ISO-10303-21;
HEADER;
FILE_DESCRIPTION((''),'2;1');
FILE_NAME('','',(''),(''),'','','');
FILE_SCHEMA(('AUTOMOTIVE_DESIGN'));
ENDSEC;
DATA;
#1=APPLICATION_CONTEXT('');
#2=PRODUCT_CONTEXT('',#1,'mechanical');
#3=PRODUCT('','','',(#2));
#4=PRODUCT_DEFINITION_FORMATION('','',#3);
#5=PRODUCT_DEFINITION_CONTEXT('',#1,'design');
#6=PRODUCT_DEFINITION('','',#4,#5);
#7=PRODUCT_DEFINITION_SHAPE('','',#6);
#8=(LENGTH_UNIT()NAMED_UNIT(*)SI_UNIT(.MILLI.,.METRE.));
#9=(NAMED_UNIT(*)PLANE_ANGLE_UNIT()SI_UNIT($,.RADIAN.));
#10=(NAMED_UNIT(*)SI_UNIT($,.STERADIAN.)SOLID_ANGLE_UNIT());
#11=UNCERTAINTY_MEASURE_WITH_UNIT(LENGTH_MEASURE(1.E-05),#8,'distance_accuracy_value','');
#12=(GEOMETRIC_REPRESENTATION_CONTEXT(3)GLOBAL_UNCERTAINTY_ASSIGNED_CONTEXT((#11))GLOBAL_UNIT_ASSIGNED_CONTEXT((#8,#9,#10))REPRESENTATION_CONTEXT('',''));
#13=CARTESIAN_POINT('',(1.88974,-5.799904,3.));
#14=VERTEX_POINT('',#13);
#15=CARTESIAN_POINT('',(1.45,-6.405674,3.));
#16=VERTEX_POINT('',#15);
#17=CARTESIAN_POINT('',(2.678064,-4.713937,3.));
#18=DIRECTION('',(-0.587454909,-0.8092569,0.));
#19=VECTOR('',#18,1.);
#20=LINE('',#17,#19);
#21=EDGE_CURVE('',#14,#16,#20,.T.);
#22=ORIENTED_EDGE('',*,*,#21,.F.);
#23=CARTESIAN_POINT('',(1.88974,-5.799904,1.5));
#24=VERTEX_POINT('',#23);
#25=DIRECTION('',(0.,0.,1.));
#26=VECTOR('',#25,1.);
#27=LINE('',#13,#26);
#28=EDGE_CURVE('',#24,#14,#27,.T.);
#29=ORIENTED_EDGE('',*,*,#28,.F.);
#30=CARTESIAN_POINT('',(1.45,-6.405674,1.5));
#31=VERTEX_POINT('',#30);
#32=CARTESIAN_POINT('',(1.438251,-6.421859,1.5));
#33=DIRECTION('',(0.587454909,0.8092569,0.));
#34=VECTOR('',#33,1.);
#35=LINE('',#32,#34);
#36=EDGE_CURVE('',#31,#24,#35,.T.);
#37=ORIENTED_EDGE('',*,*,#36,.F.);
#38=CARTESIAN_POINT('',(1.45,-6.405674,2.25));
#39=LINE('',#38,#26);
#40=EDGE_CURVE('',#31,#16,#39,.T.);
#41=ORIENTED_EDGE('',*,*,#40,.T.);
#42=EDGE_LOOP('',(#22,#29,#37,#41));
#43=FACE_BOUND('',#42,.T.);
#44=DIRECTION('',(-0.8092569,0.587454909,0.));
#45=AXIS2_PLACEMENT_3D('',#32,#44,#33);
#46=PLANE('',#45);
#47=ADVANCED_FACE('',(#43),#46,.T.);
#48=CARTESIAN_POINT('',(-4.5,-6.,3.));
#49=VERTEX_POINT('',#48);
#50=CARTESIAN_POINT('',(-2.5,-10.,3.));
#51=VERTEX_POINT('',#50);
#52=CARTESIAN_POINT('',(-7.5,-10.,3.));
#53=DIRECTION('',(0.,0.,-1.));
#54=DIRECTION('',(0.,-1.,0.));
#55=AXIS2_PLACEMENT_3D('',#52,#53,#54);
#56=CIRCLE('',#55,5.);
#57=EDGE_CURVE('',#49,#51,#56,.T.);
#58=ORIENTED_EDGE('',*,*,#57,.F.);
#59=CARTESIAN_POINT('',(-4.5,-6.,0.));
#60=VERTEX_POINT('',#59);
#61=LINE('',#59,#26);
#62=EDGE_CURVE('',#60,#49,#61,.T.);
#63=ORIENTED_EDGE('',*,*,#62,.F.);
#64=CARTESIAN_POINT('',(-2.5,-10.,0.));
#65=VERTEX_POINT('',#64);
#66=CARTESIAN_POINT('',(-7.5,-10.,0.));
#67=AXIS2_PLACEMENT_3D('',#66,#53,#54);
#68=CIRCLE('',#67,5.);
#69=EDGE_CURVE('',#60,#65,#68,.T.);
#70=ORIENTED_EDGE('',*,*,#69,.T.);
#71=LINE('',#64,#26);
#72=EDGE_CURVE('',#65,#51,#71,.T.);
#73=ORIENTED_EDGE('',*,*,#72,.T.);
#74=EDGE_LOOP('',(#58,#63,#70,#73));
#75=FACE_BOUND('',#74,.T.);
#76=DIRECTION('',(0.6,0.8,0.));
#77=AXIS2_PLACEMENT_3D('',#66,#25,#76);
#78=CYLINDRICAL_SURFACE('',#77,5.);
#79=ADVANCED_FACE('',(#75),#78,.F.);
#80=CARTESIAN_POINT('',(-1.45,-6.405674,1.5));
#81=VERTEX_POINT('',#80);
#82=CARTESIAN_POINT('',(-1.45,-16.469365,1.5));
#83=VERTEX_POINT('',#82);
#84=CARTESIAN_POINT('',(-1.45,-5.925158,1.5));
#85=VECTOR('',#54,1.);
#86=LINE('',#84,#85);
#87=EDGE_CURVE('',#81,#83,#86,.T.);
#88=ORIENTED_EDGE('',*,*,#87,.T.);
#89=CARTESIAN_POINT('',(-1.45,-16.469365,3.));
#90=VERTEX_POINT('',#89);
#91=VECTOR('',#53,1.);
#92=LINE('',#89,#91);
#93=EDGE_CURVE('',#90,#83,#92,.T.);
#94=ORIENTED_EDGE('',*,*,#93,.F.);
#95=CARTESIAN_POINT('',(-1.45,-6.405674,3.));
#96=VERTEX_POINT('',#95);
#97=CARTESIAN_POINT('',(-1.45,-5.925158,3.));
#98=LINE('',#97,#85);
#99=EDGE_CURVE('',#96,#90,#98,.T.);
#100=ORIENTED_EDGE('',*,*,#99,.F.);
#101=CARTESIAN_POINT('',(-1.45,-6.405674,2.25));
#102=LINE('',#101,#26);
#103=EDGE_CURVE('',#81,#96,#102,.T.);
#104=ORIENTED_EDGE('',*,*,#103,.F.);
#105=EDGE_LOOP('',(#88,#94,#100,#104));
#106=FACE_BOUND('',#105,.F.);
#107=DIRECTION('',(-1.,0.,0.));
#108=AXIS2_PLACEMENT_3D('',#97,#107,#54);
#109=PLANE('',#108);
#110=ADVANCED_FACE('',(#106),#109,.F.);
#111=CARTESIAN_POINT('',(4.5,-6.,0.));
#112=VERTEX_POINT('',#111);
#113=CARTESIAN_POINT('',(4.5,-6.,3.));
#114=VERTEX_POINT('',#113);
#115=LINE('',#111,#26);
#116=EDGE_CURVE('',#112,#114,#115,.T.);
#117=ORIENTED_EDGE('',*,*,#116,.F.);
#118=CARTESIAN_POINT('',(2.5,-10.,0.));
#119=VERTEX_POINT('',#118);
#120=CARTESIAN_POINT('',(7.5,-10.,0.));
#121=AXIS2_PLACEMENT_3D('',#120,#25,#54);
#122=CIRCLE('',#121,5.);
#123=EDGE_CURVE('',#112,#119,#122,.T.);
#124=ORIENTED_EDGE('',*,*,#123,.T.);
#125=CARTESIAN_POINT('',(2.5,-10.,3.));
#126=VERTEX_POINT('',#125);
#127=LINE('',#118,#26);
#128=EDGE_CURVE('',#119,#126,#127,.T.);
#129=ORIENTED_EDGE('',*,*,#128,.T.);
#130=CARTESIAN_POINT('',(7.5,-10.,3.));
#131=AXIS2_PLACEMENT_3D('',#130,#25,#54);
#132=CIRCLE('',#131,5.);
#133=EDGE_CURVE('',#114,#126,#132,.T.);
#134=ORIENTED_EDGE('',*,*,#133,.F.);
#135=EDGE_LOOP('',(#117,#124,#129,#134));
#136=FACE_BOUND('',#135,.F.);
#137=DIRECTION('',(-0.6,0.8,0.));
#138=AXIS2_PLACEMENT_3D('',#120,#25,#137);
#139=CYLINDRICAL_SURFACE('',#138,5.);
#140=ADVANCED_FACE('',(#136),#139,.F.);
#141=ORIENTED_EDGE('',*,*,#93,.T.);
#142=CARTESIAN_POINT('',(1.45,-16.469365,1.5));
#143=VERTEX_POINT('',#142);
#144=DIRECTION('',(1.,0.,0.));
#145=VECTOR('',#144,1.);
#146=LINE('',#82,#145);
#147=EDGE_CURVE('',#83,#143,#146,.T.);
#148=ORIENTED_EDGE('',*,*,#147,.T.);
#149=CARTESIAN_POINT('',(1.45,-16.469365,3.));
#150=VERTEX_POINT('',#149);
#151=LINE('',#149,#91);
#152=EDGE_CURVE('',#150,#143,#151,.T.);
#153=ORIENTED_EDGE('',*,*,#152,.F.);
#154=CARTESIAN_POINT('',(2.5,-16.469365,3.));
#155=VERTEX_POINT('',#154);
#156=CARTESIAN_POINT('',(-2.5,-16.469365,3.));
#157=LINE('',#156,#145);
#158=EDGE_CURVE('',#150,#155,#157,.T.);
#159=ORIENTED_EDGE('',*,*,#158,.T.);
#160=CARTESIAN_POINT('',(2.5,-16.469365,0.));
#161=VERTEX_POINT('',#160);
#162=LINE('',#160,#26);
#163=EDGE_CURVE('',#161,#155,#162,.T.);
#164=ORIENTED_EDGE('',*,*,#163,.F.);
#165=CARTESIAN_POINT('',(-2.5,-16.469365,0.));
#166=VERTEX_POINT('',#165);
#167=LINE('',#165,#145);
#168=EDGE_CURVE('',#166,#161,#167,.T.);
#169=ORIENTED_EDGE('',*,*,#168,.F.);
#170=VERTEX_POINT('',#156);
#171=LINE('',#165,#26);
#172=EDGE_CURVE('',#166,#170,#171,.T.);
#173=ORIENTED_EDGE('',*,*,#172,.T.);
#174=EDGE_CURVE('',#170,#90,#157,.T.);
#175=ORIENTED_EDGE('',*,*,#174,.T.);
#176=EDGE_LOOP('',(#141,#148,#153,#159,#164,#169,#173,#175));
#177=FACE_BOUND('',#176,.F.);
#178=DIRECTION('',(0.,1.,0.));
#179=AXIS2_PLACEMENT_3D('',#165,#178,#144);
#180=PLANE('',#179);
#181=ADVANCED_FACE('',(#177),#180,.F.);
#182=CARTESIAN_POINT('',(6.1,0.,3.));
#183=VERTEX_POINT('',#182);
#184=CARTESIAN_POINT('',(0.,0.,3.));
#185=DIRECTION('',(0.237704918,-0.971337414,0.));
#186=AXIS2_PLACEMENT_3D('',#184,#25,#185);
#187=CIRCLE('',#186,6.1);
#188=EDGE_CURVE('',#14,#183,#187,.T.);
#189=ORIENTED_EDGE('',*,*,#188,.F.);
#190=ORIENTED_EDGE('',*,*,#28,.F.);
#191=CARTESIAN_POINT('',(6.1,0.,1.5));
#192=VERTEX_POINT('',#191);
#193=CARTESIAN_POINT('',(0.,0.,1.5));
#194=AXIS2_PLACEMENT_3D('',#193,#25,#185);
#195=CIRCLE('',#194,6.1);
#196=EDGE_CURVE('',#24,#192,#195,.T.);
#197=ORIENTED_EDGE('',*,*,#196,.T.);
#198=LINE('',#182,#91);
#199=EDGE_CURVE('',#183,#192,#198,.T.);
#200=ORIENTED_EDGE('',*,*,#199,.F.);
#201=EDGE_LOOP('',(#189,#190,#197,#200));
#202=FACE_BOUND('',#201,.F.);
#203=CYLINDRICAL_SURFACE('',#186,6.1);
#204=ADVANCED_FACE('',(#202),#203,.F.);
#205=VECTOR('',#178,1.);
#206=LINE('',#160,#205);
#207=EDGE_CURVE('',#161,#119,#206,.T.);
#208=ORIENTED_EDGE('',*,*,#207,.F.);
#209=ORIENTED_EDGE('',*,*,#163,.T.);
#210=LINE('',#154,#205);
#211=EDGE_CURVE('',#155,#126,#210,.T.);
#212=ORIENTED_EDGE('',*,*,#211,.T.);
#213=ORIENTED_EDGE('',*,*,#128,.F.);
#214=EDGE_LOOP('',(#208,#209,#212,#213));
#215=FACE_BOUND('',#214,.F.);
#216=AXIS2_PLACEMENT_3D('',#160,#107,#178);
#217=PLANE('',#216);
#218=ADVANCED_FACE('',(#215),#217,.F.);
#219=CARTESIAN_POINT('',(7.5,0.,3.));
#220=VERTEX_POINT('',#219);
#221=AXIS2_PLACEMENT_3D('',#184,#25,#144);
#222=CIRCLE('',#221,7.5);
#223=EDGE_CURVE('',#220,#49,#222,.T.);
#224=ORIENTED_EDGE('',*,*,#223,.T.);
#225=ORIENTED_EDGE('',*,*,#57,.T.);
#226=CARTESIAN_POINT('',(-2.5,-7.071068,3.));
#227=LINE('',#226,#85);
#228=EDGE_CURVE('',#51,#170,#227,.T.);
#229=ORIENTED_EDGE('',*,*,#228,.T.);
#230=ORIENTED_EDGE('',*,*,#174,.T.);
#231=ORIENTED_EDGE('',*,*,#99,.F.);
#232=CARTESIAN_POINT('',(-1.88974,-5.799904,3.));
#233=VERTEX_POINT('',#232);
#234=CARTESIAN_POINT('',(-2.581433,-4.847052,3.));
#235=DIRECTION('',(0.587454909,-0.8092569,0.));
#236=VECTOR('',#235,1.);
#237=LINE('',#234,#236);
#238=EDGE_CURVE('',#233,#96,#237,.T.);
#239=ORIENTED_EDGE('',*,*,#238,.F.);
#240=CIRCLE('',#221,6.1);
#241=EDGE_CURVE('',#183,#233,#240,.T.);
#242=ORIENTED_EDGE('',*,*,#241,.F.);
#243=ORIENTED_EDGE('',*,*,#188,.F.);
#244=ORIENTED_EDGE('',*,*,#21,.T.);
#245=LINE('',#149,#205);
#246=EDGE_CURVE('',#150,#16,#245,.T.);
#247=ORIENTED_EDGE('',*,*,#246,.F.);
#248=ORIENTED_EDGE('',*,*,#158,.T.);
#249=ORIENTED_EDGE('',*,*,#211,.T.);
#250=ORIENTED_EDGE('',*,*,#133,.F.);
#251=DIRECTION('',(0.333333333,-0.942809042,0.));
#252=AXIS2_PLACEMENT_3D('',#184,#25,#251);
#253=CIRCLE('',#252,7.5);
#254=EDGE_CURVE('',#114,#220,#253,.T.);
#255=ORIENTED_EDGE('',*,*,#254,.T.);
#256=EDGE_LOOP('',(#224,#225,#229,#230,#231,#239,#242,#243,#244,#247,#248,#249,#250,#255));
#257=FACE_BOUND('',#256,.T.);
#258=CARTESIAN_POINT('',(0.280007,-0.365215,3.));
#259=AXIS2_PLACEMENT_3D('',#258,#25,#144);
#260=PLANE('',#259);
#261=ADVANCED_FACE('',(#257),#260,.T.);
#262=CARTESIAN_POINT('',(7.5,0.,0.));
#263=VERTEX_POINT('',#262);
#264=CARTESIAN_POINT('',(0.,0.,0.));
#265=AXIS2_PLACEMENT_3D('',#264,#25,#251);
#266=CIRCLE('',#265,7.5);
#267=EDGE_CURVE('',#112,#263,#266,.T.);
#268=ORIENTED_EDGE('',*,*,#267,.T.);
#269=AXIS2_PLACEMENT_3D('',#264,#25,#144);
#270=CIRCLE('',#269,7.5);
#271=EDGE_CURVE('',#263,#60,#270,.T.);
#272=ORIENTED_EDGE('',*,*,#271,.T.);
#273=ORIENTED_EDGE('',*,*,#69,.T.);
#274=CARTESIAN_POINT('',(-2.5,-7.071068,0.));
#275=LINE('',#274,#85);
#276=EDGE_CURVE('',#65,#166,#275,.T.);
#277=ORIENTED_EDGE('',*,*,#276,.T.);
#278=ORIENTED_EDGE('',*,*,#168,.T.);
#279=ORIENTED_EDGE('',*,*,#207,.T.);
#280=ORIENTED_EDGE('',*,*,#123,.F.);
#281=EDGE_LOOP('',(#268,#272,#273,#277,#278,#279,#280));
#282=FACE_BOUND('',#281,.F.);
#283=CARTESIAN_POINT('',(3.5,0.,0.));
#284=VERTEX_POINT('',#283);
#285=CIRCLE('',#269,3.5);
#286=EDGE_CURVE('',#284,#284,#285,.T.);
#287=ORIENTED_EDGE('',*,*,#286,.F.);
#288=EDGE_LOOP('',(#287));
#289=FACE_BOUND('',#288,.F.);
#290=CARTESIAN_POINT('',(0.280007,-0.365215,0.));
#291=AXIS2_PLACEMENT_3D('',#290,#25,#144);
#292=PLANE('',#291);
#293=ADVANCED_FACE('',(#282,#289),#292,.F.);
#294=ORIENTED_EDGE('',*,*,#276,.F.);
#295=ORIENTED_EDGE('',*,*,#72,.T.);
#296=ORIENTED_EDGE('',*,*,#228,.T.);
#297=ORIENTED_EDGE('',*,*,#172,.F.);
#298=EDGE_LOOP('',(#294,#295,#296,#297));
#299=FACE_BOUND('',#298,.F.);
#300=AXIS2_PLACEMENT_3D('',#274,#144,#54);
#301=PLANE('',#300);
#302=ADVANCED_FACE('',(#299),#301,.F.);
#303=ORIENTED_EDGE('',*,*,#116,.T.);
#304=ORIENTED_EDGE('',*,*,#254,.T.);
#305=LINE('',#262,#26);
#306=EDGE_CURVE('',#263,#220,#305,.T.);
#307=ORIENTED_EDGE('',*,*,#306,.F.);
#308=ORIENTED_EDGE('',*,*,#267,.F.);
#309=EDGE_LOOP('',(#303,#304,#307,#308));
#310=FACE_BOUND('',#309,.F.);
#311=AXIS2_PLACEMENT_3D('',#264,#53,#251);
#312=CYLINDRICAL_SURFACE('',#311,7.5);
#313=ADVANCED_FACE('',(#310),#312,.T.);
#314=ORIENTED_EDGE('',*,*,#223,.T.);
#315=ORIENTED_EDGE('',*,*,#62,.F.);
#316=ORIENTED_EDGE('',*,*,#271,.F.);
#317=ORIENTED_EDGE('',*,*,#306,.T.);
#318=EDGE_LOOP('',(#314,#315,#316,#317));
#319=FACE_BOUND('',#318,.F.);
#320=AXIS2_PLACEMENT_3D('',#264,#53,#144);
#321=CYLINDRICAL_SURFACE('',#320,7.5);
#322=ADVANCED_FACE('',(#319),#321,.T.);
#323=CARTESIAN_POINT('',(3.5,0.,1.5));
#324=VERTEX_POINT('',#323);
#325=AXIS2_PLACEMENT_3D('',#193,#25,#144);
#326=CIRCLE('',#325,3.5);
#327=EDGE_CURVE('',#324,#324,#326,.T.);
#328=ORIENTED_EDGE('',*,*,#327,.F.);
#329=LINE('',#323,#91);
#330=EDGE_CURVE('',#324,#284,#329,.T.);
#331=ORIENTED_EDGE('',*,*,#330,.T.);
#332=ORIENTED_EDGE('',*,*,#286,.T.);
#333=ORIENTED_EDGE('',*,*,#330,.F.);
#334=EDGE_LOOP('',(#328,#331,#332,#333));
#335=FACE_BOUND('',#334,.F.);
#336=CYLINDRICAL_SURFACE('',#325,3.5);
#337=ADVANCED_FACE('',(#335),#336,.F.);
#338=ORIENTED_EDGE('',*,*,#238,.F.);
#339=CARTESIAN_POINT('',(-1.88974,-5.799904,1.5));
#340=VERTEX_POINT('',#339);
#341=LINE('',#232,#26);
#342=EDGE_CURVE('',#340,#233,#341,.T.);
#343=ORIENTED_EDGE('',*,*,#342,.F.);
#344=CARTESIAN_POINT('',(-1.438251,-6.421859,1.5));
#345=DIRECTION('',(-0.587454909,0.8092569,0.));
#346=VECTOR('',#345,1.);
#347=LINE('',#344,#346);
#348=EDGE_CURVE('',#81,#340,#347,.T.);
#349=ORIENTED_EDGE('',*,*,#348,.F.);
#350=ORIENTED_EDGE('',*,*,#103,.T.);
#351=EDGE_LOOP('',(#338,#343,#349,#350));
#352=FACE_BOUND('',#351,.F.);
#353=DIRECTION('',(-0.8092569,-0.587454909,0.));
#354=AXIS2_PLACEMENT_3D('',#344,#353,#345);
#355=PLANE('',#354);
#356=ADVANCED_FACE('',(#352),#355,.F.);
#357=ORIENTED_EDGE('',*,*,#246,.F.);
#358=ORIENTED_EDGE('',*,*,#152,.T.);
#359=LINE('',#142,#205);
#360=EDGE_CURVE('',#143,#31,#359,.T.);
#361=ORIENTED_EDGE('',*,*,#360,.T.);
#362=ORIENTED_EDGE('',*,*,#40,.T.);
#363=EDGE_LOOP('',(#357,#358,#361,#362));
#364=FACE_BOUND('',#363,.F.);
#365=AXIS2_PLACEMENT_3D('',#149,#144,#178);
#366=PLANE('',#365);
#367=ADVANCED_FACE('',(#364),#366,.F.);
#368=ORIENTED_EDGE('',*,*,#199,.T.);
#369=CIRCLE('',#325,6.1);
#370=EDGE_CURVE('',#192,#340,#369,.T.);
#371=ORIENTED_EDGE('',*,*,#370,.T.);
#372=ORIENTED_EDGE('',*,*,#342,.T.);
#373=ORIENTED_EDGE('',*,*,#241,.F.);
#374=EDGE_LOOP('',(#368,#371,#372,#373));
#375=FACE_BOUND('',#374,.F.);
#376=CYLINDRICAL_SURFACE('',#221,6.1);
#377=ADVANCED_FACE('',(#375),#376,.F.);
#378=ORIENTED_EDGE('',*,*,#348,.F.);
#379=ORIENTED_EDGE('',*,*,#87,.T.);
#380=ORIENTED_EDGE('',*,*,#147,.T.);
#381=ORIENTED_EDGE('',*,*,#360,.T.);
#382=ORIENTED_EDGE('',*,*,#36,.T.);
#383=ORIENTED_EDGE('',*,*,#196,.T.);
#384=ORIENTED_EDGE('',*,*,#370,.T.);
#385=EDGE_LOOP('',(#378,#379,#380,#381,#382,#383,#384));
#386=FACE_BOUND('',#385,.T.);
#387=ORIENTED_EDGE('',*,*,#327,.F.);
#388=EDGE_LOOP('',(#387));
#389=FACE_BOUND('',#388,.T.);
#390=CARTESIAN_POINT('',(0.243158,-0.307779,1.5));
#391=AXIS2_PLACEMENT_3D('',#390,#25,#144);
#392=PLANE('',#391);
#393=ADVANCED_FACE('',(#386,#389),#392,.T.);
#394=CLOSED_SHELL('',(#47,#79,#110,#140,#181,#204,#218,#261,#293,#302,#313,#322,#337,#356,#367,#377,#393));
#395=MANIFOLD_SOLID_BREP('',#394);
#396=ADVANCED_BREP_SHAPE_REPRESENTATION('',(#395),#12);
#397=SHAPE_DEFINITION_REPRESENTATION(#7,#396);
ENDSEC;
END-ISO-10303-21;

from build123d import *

# Parameters (mm, degrees)
F1_DEPTH    = 3
F3_DEPTH    = 1.5
F4_R        = 3.5
F5_DEPTH    = 1.5
F6_T1_DEPTH = 2.7420993995
F7_R        = 5


# Not quite as in the source:
# - a fillet or chamfer that OpenCascade refuses, or shapes differently, is made with other operations: its cross-section is extruded or revolved along the edge and cut away or added


with BuildPart() as f1:
    # F0 (on Top) → F1 (new body)
    with BuildSketch(Plane.XY):
        with BuildLine():
            ThreePointArc((2.5, -7.0710678119), (6.123724357, -4.3301270189), (7.5, 0))
            ThreePointArc((7.5, 0), (-4.3301270189, 6.123724357), (-2.5, -7.0710678119))
            Line((-2.5, -7.0710678119), (2.5, -7.0710678119))
        make_face()
        with BuildLine():
            Line((2.5, -7.0710678119), (-2.5, -7.0710678119))
            ThreePointArc((-2.5, -7.0710678119), (0, -7.5), (2.5, -7.0710678119))
        make_face()
        with BuildLine():
            ThreePointArc((2.5, -7.0710678119), (0, -7.5), (-2.5, -7.0710678119))
            Line((-2.5, -7.0710678119), (-2.5, -16.4693647414))
            Line((-2.5, -16.4693647414), (2.5, -16.4693647414))
            Line((2.5, -16.4693647414), (2.5, -7.0710678119))
        make_face()
    extrude(amount=F1_DEPTH)

    # F2 (on face) → F3 (cut)
    with BuildSketch(Plane.XY.offset(3)):
        with BuildLine():
            ThreePointArc((1.45, -5.9251582257), (4.79869774, -3.7659660115), (6.1, 0))
            ThreePointArc((6.1, 0), (-3.7659660115, 4.79869774), (-1.45, -5.9251582257))
            Line((-1.45, -5.9251582257), (1.45, -5.9251582257))
        make_face()
        with BuildLine():
            Line((1.45, -5.9251582257), (-1.45, -5.9251582257))
            ThreePointArc((-1.45, -5.9251582257), (0, -6.1), (1.45, -5.9251582257))
        make_face()
        with BuildLine():
            ThreePointArc((1.45, -5.9251582257), (0, -6.1), (-1.45, -5.9251582257))
            Line((-1.45, -5.9251582257), (-1.45, -16.4693647414))
            Line((-1.45, -16.4693647414), (1.45, -16.4693647414))
            Line((1.45, -16.4693647414), (1.45, -5.9251582257))
        make_face()
    extrude(amount=-F3_DEPTH, mode=Mode.SUBTRACT)

    # F4 (on face) → F5 (cut, through all)
    with BuildSketch(Plane.XY.offset(1.5)):
        Circle(F4_R)
    extrude(amount=-F5_DEPTH, mode=Mode.SUBTRACT)

    # F6: chamfer of 0.5 on 2 edges, made by hand

    # F6_s2 → F6_t1 (cut)
    with BuildSketch(Plane.XY.offset(1.5)):
        with BuildLine():
            Line((1.4382509018, -6.4218590468), (1.9014892015, -5.7837185114))
            Line((1.9014892015, -5.7837185114), (1.8983912669, -5.7742104726))
            ThreePointArc((1.8983912669, -5.7742104726), (1.6758695773, -5.854874991), (1.4476229508, -5.9154448516))
            Line((1.4476229508, -5.9154448516), (1.44, -5.9251582257))
            ThreePointArc((1.44, -5.9251582257), (1.44, -6.1735086363), (1.4282509018, -6.4218590468))
            Line((1.4282509018, -6.4218590468), (1.4382509018, -6.4218590468))
        make_face()
        with BuildLine():
            Line((-1.4382509018, -6.4218590468), (-1.9014892015, -5.7837185114))
            Line((-1.9014892015, -5.7837185114), (-1.8983912669, -5.7742104726))
            ThreePointArc((-1.8983912669, -5.7742104726), (-1.6758695773, -5.854874991), (-1.4476229508, -5.9154448516))
            Line((-1.4476229508, -5.9154448516), (-1.44, -5.9251582257))
            ThreePointArc((-1.44, -5.9251582257), (-1.44, -6.1735086363), (-1.4282509018, -6.4218590468))
            Line((-1.4282509018, -6.4218590468), (-1.4382509018, -6.4218590468))
        make_face()
    extrude(amount=F6_T1_DEPTH, mode=Mode.SUBTRACT)

    # F7
    f7_edges = [f1.edges().sort_by_distance(p)[0] for p in [
        (-2.5, -7.071068, 1.5),
        (2.5, -7.071068, 1.5),
    ]]
    fillet(f7_edges, radius=F7_R)


solid = f1.part
